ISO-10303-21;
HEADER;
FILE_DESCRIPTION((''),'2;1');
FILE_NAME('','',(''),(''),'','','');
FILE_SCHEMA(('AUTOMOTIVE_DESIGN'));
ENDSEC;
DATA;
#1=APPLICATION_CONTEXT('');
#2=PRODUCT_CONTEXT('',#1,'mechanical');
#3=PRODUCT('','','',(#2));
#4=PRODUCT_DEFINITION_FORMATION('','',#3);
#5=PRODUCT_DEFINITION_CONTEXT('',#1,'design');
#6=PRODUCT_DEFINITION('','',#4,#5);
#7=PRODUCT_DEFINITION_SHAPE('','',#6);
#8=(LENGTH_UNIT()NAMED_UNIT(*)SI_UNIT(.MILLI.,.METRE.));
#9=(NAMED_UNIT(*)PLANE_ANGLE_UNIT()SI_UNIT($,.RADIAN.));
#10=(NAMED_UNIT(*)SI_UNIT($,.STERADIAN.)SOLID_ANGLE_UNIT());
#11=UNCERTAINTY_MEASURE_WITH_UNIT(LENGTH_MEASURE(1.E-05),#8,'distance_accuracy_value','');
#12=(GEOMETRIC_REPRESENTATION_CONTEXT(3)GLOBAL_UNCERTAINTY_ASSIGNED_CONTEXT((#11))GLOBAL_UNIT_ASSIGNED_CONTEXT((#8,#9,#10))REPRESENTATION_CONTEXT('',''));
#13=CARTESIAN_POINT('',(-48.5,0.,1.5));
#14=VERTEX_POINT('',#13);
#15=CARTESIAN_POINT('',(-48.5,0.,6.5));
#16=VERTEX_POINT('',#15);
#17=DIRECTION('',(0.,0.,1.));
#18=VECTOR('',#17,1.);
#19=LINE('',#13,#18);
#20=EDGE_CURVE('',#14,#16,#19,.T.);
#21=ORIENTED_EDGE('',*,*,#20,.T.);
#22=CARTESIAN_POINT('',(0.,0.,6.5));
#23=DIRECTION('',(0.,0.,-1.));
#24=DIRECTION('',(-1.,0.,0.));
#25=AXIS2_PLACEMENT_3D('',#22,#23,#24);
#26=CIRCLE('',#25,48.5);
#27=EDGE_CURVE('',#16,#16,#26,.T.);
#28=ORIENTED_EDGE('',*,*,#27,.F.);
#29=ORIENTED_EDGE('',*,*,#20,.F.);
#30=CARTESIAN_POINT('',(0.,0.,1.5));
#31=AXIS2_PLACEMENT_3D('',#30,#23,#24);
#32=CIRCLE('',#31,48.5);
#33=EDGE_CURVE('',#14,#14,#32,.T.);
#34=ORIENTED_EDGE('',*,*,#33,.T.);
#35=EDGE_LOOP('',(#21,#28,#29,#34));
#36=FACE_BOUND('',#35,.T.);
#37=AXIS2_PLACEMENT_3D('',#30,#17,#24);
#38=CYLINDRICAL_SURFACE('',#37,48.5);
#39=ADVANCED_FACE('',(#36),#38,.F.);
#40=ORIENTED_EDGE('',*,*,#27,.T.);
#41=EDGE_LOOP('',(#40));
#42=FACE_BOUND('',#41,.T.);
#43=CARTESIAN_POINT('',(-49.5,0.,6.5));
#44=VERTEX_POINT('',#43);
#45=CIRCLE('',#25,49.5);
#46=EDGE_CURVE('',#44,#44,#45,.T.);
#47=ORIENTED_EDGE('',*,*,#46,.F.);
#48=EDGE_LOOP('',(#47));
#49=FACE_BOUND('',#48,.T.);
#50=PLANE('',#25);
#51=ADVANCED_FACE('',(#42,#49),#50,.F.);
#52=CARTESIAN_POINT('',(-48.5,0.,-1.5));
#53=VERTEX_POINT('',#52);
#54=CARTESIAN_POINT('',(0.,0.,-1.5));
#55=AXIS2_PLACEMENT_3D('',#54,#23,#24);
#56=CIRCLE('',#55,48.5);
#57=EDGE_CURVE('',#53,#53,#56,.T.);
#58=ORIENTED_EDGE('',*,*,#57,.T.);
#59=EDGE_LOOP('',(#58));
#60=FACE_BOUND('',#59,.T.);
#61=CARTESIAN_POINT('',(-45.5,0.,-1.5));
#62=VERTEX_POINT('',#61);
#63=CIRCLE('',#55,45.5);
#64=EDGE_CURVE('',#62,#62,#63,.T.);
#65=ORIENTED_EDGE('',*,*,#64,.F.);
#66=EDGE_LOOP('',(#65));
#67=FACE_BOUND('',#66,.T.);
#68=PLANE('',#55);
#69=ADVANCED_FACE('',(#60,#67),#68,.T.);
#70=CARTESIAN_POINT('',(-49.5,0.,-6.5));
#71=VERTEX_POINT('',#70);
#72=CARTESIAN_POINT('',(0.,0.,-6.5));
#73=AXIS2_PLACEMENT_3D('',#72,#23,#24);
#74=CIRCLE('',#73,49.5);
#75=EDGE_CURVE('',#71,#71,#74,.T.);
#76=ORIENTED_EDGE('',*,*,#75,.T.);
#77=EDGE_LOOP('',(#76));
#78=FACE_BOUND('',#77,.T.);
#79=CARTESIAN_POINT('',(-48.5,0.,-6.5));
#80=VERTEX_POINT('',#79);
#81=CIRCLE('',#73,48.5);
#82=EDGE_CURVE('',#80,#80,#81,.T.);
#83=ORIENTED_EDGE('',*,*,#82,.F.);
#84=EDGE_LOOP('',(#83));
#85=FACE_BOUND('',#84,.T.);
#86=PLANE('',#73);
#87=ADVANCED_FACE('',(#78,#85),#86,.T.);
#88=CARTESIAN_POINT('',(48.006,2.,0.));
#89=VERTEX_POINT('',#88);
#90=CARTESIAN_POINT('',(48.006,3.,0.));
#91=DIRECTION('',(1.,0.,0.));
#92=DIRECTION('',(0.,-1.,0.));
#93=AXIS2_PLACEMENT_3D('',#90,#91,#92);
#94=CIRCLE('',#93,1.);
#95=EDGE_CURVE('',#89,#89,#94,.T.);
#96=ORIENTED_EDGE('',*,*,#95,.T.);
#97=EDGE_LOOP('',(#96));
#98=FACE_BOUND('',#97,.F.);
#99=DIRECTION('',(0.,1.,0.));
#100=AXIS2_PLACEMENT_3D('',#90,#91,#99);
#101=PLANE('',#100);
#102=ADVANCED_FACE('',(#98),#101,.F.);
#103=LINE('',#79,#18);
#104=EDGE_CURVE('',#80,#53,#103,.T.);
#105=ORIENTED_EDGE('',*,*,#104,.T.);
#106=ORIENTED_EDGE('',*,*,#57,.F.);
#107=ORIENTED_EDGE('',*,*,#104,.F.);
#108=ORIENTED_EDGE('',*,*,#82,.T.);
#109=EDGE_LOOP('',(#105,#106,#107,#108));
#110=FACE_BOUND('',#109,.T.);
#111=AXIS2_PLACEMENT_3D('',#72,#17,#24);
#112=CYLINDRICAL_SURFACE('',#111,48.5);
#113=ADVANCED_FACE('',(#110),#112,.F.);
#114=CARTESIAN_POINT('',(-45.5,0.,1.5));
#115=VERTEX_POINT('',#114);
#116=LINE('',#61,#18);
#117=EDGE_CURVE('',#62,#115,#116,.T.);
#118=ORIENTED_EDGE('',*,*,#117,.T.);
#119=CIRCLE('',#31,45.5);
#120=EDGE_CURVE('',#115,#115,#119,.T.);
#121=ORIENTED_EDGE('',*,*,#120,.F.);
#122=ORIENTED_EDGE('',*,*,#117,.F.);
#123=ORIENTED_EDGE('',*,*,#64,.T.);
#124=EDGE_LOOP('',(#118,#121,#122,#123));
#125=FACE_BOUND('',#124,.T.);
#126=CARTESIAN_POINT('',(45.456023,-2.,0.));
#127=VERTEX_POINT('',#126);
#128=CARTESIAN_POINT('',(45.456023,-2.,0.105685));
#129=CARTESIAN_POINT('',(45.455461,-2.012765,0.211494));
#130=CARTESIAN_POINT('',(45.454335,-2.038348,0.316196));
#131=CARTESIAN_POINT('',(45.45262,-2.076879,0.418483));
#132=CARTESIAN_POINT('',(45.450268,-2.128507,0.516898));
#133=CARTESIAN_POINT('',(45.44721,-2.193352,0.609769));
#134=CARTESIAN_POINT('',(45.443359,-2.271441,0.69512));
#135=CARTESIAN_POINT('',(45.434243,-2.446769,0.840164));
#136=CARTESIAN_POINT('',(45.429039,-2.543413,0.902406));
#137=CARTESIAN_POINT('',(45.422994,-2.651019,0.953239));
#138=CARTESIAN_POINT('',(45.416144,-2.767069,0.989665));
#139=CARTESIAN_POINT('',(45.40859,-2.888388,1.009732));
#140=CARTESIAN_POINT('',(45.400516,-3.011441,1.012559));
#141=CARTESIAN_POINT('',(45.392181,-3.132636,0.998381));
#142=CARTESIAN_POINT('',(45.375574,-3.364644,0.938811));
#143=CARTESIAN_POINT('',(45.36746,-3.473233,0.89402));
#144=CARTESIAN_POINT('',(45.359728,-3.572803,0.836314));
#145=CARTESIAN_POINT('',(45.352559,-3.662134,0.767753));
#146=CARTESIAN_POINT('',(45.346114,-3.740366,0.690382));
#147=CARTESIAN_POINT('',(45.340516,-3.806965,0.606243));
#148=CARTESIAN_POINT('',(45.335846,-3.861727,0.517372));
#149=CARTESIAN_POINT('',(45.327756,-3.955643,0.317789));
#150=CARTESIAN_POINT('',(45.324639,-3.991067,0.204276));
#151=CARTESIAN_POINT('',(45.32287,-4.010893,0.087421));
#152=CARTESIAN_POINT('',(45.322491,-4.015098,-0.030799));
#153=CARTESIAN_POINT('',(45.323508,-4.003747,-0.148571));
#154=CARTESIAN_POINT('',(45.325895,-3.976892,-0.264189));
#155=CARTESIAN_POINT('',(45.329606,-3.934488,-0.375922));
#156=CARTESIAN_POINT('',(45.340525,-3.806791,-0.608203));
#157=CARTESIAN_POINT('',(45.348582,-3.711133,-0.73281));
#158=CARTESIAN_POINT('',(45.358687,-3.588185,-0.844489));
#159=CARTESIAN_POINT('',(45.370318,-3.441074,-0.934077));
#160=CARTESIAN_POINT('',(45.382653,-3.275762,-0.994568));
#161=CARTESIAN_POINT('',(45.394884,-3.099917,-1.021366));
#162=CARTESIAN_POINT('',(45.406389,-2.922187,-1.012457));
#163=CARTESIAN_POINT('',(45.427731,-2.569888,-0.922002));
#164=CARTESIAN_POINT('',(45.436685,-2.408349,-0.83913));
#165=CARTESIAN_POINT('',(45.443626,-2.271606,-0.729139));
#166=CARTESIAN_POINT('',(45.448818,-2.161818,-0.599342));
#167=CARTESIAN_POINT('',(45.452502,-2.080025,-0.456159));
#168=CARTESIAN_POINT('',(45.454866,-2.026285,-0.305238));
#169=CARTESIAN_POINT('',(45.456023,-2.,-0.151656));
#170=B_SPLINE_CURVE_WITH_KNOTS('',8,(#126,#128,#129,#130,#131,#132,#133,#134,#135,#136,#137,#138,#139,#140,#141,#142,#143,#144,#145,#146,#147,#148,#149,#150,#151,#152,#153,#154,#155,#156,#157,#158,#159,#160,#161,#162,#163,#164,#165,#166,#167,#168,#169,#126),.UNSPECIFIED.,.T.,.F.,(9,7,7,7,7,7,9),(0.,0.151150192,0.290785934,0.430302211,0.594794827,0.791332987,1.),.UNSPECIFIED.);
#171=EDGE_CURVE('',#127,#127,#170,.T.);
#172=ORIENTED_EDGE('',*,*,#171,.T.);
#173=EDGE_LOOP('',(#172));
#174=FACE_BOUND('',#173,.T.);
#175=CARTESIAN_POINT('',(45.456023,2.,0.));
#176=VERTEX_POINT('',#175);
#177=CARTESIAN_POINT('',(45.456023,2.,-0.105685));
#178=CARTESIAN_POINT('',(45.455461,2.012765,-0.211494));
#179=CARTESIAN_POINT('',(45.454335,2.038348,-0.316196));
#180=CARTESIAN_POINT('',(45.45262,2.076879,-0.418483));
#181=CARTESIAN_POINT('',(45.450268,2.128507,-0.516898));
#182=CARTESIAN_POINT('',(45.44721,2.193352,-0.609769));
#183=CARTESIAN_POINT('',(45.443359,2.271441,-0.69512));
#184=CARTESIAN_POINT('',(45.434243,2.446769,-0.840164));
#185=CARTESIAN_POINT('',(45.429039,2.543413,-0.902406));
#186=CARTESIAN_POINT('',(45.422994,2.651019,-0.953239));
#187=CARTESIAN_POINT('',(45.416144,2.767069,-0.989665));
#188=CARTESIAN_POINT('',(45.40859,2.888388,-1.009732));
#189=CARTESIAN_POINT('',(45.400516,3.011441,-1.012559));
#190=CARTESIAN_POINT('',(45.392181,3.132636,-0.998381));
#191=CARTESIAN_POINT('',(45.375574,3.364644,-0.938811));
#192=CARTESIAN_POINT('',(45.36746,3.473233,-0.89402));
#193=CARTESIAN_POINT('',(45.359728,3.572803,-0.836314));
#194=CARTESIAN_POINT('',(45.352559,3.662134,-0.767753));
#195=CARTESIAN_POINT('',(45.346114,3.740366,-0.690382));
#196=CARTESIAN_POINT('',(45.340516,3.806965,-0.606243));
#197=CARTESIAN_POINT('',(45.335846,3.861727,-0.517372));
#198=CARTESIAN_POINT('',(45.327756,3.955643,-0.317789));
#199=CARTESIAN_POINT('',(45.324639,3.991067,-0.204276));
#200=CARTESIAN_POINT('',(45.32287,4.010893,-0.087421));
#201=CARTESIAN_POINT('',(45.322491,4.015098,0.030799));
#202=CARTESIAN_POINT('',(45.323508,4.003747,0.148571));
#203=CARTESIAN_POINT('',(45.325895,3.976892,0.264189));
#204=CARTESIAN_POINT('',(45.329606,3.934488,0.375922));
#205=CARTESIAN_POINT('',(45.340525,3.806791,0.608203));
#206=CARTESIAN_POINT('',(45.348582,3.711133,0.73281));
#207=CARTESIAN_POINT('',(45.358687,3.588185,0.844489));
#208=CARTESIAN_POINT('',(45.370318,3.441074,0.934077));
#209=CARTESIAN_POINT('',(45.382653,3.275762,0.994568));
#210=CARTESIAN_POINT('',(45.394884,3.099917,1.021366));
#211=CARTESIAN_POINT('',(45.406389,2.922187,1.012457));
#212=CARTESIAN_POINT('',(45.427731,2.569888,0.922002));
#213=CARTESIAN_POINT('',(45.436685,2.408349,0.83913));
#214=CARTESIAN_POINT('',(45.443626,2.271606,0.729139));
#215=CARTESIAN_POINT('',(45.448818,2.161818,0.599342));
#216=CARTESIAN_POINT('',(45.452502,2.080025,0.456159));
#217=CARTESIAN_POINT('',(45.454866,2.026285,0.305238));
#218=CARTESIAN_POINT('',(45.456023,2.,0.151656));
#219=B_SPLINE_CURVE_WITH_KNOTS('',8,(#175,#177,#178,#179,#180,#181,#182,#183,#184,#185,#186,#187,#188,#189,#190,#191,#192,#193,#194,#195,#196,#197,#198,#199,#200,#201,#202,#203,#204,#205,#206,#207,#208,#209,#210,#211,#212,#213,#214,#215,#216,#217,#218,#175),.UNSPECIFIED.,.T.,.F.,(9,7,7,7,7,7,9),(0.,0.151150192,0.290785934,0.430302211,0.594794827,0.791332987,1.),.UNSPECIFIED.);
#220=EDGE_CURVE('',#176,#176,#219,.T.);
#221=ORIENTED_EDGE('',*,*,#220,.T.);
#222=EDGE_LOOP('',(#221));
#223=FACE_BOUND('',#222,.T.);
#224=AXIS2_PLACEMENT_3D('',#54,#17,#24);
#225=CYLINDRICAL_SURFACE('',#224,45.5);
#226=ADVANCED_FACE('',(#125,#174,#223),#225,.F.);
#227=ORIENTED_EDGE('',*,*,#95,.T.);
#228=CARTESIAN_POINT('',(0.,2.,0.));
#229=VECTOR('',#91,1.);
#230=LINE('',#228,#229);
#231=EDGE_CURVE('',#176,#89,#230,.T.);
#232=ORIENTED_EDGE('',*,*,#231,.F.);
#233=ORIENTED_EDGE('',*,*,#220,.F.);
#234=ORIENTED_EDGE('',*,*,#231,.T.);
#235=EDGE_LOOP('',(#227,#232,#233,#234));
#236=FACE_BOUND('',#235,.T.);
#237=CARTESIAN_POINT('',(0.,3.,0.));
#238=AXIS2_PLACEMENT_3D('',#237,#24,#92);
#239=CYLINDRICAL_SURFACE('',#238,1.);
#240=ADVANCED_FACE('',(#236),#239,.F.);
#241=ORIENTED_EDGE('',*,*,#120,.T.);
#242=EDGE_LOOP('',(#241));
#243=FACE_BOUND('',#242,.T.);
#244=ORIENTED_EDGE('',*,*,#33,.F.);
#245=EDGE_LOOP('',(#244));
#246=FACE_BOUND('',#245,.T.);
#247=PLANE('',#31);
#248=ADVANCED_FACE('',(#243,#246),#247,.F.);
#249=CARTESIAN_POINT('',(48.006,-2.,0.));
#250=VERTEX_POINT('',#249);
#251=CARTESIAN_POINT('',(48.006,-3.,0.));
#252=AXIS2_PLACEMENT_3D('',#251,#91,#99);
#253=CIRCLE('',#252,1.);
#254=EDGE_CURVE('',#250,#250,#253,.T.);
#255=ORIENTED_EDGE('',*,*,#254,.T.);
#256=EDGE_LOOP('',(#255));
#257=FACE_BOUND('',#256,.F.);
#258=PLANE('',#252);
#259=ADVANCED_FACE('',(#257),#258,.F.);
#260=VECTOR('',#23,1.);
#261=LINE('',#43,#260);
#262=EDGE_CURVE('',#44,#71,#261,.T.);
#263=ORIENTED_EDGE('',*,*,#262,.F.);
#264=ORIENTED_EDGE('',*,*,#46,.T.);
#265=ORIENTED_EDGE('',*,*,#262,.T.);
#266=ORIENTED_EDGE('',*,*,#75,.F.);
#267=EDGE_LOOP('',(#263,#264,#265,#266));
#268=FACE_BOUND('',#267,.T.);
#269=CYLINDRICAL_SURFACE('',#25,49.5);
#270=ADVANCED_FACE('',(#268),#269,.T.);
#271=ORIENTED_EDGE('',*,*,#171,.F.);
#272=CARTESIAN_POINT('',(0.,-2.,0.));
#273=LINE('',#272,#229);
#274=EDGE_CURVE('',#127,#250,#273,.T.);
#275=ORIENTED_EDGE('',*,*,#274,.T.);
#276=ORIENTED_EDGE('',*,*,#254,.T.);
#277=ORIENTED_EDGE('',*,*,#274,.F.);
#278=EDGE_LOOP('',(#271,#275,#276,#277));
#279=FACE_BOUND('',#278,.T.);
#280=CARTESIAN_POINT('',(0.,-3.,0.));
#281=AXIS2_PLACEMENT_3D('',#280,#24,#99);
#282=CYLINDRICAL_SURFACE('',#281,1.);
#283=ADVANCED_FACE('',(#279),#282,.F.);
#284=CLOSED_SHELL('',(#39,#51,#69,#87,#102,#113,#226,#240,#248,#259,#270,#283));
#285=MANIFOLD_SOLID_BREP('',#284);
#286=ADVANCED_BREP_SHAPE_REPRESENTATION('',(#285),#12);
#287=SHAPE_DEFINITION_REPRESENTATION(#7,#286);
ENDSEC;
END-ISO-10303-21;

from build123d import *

# Parameters (mm, degrees)
F2_R     = 1
F3_DEPTH = 48.006


# Not quite as in the source:
# - the program builds the solid bodies; features that only make, move or delete a surface that nothing else refers to are left out


with BuildPart() as f1:
    # F0 (on Front) → F1 (revolve)
    with BuildSketch(Plane.XZ):
        Polygon((-48.5, 6.5), (-49.5, 6.5), (-49.5, -6.5), (-48.5, -6.5), (-48.5, -1.5), (-45.5, -1.5), (-45.5, 0), (-45.5, 1.5), (-48.5, 1.5), align=None)
    revolve(axis=Axis((0, 0, -3.8321989188), (0, 0, -1)))

    # F2 (on Right) → F3 (cut)
    with BuildSketch(Plane.YZ):
        with Locations((-3, 0)):
            Circle(F2_R)
        with BuildLine():
            ThreePointArc((4, 0), (3, 1), (2, 0))
            ThreePointArc((2, 0), (3, -1), (4, 0))
        make_face()
    extrude(amount=F3_DEPTH, mode=Mode.SUBTRACT)


solid = f1.part
